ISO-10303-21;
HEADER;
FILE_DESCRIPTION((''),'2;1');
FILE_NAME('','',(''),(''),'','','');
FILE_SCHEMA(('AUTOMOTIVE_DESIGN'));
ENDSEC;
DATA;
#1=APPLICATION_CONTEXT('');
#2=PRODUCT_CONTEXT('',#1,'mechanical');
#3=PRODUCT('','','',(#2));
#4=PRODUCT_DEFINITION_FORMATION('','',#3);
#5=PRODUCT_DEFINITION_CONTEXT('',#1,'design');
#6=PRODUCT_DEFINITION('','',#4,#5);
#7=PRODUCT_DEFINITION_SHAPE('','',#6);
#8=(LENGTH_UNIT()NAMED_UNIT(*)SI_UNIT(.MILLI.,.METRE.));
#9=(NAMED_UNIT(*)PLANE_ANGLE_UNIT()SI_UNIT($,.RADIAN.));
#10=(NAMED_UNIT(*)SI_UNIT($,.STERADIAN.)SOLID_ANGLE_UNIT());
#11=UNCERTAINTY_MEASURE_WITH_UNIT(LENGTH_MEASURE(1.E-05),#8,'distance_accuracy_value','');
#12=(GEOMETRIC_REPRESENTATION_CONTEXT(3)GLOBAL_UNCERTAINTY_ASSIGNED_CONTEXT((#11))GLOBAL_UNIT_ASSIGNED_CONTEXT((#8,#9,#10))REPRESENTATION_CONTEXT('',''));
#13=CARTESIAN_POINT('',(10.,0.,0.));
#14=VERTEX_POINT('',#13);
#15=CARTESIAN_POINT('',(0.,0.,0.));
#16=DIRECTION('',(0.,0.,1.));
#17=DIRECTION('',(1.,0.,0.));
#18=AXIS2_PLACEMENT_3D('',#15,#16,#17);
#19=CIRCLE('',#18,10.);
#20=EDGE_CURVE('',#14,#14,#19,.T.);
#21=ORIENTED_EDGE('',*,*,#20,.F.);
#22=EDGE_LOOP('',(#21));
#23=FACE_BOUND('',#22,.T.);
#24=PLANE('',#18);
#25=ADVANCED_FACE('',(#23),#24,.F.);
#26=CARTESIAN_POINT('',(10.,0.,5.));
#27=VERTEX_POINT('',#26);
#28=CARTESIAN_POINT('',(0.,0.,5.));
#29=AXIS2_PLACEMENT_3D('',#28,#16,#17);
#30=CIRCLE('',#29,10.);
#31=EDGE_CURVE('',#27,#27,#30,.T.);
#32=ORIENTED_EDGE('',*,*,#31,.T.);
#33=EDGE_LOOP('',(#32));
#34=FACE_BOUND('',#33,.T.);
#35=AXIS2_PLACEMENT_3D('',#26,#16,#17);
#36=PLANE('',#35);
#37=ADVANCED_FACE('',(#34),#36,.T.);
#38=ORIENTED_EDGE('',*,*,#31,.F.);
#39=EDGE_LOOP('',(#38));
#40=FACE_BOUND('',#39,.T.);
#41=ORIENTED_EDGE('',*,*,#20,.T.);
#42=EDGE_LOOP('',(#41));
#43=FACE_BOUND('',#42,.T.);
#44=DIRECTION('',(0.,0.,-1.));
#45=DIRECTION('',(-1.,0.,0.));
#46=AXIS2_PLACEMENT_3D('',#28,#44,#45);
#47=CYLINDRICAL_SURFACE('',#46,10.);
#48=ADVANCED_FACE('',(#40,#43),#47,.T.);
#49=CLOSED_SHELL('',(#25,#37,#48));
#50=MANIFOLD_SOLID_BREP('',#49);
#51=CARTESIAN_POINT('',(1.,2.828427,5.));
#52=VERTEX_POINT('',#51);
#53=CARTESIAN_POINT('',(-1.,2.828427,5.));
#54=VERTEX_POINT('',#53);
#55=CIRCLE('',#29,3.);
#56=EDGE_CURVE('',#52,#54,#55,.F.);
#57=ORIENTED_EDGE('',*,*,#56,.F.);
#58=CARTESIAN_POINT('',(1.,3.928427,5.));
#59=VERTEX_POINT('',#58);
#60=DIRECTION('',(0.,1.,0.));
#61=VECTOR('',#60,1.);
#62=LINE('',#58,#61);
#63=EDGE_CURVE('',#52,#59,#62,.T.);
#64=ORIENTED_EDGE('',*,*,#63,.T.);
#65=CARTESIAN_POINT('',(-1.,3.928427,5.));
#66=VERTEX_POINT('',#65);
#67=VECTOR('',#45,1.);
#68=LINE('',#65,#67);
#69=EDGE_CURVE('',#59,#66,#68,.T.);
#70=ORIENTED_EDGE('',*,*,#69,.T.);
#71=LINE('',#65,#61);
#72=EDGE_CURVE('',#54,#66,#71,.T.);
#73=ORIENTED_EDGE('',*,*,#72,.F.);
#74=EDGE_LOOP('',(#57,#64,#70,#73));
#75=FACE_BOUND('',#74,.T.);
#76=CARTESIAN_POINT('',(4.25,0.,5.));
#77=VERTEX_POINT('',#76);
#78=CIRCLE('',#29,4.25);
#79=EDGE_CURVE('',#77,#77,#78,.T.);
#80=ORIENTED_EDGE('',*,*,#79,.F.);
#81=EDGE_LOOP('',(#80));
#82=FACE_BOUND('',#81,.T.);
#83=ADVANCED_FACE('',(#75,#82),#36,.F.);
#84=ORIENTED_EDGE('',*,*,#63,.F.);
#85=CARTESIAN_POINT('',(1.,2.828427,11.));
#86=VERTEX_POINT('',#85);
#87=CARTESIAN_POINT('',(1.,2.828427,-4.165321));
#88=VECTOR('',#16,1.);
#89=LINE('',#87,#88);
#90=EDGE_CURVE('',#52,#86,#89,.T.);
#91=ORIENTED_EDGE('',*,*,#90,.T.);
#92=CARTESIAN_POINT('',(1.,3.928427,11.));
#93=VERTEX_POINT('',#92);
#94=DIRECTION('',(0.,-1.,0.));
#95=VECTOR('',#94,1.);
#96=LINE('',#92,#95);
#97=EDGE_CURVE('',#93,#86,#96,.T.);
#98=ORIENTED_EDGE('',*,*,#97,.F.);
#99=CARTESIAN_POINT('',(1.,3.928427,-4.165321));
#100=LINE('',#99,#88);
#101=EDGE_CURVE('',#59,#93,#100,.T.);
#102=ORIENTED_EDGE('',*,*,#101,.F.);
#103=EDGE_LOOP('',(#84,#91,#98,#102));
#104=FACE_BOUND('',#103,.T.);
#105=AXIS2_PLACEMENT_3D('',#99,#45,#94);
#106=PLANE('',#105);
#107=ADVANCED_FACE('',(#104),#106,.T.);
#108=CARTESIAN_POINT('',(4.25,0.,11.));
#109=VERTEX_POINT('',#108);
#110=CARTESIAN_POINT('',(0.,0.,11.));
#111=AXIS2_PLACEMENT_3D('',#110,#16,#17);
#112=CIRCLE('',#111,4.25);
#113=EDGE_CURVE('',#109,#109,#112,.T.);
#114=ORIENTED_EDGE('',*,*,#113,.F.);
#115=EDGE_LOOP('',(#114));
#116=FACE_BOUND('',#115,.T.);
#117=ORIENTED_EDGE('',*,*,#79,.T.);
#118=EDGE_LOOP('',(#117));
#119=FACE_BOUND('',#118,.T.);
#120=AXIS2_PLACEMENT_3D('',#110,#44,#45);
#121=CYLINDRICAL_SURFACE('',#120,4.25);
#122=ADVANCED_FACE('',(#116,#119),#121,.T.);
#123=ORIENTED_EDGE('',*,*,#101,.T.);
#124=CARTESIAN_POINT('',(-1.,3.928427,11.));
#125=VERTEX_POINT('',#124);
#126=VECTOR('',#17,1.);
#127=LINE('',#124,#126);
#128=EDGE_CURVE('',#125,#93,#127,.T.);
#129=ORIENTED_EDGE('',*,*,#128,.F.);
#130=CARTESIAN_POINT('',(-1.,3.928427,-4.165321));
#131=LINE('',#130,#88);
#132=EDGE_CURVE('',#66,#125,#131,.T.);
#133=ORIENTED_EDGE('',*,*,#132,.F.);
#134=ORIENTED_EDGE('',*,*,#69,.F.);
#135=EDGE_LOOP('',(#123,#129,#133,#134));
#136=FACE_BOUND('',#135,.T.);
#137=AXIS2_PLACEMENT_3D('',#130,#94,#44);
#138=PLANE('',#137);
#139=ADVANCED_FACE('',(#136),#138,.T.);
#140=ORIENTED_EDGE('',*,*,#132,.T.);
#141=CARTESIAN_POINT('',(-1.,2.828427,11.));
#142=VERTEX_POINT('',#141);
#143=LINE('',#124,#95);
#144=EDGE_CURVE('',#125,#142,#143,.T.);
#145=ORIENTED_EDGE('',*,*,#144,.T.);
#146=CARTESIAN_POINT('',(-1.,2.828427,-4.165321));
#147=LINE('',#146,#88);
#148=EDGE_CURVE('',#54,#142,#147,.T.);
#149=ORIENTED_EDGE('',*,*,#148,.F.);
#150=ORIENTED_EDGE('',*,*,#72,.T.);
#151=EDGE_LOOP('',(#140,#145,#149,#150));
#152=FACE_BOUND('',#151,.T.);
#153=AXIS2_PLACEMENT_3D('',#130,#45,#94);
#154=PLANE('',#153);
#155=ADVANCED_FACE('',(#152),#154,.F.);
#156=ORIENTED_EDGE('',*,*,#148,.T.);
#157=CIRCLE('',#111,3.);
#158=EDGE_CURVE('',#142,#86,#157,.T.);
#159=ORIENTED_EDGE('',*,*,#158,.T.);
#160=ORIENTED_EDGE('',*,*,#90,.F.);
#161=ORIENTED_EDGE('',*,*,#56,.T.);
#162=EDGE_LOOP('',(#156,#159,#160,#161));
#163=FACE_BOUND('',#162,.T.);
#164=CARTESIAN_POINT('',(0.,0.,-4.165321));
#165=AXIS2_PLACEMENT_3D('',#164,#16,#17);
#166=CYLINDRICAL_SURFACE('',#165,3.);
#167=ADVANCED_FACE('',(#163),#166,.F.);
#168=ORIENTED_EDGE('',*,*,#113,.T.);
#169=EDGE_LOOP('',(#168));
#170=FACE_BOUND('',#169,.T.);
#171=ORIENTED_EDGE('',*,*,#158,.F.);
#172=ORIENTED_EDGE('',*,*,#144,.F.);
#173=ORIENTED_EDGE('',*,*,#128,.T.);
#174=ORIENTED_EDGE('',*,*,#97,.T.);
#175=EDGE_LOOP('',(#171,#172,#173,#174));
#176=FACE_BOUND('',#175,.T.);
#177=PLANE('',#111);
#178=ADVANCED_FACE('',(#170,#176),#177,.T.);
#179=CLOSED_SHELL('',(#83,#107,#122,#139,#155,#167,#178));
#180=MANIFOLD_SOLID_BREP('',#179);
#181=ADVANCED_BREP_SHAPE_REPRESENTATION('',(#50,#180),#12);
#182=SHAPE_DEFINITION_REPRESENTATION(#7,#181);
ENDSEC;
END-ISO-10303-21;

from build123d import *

# Parameters (mm, degrees)
SKETCH1_R           = 10
BOSS_EXTRUDE1_DEPTH = 5
SKETCH3_R           = 4.25
BOSS_EXTRUDE2_DEPTH = 6
CUT_EXTRUDE1_DEPTH  = 6


# Read off the part's stored shape, not the designer's step: Split1
with BuildPart() as part:
    # Sketch1 → Boss-Extrude1 (new body)
    with BuildSketch(Plane(origin=(0, 0, 0), x_dir=(0, 1, 0), z_dir=(0, 0, 1))):
        with Locations(Location((0, 0, 0), (0, 0, 270))):
            Circle(SKETCH1_R)
    extrude(amount=BOSS_EXTRUDE1_DEPTH)

    # Sketch3 → Boss-Extrude2 (add)
    with BuildSketch(Plane.XY.offset(5)):
        Circle(SKETCH3_R)
    extrude(amount=BOSS_EXTRUDE2_DEPTH)

    # Sketch2 → Cut-Extrude1 (cut)
    with BuildSketch(Plane.XY.offset(11)):
        with BuildLine():
            Line((-1, 3.928427125), (1, 3.928427125))
            Line((1, 3.928427125), (1, 2.828427125))
            ThreePointArc((1, 2.828427125), (0, -3), (-1, 2.828427125))
            Line((-1, 2.828427125), (-1, 3.928427125))
        make_face()
    extrude(amount=-CUT_EXTRUDE1_DEPTH, mode=Mode.SUBTRACT)


with BuildPart() as body_2:
    # Split1: the piece on the far side of the plane
    add(part.part)
    split(bisect_by=Plane.XY.offset(5), keep=Keep.BOTTOM)


with BuildPart() as part_1:
    add(part.part)

    # Split1
    split(bisect_by=Plane.XY.offset(5), keep=Keep.TOP)


solid = Compound([body_2.part, part_1.part])
